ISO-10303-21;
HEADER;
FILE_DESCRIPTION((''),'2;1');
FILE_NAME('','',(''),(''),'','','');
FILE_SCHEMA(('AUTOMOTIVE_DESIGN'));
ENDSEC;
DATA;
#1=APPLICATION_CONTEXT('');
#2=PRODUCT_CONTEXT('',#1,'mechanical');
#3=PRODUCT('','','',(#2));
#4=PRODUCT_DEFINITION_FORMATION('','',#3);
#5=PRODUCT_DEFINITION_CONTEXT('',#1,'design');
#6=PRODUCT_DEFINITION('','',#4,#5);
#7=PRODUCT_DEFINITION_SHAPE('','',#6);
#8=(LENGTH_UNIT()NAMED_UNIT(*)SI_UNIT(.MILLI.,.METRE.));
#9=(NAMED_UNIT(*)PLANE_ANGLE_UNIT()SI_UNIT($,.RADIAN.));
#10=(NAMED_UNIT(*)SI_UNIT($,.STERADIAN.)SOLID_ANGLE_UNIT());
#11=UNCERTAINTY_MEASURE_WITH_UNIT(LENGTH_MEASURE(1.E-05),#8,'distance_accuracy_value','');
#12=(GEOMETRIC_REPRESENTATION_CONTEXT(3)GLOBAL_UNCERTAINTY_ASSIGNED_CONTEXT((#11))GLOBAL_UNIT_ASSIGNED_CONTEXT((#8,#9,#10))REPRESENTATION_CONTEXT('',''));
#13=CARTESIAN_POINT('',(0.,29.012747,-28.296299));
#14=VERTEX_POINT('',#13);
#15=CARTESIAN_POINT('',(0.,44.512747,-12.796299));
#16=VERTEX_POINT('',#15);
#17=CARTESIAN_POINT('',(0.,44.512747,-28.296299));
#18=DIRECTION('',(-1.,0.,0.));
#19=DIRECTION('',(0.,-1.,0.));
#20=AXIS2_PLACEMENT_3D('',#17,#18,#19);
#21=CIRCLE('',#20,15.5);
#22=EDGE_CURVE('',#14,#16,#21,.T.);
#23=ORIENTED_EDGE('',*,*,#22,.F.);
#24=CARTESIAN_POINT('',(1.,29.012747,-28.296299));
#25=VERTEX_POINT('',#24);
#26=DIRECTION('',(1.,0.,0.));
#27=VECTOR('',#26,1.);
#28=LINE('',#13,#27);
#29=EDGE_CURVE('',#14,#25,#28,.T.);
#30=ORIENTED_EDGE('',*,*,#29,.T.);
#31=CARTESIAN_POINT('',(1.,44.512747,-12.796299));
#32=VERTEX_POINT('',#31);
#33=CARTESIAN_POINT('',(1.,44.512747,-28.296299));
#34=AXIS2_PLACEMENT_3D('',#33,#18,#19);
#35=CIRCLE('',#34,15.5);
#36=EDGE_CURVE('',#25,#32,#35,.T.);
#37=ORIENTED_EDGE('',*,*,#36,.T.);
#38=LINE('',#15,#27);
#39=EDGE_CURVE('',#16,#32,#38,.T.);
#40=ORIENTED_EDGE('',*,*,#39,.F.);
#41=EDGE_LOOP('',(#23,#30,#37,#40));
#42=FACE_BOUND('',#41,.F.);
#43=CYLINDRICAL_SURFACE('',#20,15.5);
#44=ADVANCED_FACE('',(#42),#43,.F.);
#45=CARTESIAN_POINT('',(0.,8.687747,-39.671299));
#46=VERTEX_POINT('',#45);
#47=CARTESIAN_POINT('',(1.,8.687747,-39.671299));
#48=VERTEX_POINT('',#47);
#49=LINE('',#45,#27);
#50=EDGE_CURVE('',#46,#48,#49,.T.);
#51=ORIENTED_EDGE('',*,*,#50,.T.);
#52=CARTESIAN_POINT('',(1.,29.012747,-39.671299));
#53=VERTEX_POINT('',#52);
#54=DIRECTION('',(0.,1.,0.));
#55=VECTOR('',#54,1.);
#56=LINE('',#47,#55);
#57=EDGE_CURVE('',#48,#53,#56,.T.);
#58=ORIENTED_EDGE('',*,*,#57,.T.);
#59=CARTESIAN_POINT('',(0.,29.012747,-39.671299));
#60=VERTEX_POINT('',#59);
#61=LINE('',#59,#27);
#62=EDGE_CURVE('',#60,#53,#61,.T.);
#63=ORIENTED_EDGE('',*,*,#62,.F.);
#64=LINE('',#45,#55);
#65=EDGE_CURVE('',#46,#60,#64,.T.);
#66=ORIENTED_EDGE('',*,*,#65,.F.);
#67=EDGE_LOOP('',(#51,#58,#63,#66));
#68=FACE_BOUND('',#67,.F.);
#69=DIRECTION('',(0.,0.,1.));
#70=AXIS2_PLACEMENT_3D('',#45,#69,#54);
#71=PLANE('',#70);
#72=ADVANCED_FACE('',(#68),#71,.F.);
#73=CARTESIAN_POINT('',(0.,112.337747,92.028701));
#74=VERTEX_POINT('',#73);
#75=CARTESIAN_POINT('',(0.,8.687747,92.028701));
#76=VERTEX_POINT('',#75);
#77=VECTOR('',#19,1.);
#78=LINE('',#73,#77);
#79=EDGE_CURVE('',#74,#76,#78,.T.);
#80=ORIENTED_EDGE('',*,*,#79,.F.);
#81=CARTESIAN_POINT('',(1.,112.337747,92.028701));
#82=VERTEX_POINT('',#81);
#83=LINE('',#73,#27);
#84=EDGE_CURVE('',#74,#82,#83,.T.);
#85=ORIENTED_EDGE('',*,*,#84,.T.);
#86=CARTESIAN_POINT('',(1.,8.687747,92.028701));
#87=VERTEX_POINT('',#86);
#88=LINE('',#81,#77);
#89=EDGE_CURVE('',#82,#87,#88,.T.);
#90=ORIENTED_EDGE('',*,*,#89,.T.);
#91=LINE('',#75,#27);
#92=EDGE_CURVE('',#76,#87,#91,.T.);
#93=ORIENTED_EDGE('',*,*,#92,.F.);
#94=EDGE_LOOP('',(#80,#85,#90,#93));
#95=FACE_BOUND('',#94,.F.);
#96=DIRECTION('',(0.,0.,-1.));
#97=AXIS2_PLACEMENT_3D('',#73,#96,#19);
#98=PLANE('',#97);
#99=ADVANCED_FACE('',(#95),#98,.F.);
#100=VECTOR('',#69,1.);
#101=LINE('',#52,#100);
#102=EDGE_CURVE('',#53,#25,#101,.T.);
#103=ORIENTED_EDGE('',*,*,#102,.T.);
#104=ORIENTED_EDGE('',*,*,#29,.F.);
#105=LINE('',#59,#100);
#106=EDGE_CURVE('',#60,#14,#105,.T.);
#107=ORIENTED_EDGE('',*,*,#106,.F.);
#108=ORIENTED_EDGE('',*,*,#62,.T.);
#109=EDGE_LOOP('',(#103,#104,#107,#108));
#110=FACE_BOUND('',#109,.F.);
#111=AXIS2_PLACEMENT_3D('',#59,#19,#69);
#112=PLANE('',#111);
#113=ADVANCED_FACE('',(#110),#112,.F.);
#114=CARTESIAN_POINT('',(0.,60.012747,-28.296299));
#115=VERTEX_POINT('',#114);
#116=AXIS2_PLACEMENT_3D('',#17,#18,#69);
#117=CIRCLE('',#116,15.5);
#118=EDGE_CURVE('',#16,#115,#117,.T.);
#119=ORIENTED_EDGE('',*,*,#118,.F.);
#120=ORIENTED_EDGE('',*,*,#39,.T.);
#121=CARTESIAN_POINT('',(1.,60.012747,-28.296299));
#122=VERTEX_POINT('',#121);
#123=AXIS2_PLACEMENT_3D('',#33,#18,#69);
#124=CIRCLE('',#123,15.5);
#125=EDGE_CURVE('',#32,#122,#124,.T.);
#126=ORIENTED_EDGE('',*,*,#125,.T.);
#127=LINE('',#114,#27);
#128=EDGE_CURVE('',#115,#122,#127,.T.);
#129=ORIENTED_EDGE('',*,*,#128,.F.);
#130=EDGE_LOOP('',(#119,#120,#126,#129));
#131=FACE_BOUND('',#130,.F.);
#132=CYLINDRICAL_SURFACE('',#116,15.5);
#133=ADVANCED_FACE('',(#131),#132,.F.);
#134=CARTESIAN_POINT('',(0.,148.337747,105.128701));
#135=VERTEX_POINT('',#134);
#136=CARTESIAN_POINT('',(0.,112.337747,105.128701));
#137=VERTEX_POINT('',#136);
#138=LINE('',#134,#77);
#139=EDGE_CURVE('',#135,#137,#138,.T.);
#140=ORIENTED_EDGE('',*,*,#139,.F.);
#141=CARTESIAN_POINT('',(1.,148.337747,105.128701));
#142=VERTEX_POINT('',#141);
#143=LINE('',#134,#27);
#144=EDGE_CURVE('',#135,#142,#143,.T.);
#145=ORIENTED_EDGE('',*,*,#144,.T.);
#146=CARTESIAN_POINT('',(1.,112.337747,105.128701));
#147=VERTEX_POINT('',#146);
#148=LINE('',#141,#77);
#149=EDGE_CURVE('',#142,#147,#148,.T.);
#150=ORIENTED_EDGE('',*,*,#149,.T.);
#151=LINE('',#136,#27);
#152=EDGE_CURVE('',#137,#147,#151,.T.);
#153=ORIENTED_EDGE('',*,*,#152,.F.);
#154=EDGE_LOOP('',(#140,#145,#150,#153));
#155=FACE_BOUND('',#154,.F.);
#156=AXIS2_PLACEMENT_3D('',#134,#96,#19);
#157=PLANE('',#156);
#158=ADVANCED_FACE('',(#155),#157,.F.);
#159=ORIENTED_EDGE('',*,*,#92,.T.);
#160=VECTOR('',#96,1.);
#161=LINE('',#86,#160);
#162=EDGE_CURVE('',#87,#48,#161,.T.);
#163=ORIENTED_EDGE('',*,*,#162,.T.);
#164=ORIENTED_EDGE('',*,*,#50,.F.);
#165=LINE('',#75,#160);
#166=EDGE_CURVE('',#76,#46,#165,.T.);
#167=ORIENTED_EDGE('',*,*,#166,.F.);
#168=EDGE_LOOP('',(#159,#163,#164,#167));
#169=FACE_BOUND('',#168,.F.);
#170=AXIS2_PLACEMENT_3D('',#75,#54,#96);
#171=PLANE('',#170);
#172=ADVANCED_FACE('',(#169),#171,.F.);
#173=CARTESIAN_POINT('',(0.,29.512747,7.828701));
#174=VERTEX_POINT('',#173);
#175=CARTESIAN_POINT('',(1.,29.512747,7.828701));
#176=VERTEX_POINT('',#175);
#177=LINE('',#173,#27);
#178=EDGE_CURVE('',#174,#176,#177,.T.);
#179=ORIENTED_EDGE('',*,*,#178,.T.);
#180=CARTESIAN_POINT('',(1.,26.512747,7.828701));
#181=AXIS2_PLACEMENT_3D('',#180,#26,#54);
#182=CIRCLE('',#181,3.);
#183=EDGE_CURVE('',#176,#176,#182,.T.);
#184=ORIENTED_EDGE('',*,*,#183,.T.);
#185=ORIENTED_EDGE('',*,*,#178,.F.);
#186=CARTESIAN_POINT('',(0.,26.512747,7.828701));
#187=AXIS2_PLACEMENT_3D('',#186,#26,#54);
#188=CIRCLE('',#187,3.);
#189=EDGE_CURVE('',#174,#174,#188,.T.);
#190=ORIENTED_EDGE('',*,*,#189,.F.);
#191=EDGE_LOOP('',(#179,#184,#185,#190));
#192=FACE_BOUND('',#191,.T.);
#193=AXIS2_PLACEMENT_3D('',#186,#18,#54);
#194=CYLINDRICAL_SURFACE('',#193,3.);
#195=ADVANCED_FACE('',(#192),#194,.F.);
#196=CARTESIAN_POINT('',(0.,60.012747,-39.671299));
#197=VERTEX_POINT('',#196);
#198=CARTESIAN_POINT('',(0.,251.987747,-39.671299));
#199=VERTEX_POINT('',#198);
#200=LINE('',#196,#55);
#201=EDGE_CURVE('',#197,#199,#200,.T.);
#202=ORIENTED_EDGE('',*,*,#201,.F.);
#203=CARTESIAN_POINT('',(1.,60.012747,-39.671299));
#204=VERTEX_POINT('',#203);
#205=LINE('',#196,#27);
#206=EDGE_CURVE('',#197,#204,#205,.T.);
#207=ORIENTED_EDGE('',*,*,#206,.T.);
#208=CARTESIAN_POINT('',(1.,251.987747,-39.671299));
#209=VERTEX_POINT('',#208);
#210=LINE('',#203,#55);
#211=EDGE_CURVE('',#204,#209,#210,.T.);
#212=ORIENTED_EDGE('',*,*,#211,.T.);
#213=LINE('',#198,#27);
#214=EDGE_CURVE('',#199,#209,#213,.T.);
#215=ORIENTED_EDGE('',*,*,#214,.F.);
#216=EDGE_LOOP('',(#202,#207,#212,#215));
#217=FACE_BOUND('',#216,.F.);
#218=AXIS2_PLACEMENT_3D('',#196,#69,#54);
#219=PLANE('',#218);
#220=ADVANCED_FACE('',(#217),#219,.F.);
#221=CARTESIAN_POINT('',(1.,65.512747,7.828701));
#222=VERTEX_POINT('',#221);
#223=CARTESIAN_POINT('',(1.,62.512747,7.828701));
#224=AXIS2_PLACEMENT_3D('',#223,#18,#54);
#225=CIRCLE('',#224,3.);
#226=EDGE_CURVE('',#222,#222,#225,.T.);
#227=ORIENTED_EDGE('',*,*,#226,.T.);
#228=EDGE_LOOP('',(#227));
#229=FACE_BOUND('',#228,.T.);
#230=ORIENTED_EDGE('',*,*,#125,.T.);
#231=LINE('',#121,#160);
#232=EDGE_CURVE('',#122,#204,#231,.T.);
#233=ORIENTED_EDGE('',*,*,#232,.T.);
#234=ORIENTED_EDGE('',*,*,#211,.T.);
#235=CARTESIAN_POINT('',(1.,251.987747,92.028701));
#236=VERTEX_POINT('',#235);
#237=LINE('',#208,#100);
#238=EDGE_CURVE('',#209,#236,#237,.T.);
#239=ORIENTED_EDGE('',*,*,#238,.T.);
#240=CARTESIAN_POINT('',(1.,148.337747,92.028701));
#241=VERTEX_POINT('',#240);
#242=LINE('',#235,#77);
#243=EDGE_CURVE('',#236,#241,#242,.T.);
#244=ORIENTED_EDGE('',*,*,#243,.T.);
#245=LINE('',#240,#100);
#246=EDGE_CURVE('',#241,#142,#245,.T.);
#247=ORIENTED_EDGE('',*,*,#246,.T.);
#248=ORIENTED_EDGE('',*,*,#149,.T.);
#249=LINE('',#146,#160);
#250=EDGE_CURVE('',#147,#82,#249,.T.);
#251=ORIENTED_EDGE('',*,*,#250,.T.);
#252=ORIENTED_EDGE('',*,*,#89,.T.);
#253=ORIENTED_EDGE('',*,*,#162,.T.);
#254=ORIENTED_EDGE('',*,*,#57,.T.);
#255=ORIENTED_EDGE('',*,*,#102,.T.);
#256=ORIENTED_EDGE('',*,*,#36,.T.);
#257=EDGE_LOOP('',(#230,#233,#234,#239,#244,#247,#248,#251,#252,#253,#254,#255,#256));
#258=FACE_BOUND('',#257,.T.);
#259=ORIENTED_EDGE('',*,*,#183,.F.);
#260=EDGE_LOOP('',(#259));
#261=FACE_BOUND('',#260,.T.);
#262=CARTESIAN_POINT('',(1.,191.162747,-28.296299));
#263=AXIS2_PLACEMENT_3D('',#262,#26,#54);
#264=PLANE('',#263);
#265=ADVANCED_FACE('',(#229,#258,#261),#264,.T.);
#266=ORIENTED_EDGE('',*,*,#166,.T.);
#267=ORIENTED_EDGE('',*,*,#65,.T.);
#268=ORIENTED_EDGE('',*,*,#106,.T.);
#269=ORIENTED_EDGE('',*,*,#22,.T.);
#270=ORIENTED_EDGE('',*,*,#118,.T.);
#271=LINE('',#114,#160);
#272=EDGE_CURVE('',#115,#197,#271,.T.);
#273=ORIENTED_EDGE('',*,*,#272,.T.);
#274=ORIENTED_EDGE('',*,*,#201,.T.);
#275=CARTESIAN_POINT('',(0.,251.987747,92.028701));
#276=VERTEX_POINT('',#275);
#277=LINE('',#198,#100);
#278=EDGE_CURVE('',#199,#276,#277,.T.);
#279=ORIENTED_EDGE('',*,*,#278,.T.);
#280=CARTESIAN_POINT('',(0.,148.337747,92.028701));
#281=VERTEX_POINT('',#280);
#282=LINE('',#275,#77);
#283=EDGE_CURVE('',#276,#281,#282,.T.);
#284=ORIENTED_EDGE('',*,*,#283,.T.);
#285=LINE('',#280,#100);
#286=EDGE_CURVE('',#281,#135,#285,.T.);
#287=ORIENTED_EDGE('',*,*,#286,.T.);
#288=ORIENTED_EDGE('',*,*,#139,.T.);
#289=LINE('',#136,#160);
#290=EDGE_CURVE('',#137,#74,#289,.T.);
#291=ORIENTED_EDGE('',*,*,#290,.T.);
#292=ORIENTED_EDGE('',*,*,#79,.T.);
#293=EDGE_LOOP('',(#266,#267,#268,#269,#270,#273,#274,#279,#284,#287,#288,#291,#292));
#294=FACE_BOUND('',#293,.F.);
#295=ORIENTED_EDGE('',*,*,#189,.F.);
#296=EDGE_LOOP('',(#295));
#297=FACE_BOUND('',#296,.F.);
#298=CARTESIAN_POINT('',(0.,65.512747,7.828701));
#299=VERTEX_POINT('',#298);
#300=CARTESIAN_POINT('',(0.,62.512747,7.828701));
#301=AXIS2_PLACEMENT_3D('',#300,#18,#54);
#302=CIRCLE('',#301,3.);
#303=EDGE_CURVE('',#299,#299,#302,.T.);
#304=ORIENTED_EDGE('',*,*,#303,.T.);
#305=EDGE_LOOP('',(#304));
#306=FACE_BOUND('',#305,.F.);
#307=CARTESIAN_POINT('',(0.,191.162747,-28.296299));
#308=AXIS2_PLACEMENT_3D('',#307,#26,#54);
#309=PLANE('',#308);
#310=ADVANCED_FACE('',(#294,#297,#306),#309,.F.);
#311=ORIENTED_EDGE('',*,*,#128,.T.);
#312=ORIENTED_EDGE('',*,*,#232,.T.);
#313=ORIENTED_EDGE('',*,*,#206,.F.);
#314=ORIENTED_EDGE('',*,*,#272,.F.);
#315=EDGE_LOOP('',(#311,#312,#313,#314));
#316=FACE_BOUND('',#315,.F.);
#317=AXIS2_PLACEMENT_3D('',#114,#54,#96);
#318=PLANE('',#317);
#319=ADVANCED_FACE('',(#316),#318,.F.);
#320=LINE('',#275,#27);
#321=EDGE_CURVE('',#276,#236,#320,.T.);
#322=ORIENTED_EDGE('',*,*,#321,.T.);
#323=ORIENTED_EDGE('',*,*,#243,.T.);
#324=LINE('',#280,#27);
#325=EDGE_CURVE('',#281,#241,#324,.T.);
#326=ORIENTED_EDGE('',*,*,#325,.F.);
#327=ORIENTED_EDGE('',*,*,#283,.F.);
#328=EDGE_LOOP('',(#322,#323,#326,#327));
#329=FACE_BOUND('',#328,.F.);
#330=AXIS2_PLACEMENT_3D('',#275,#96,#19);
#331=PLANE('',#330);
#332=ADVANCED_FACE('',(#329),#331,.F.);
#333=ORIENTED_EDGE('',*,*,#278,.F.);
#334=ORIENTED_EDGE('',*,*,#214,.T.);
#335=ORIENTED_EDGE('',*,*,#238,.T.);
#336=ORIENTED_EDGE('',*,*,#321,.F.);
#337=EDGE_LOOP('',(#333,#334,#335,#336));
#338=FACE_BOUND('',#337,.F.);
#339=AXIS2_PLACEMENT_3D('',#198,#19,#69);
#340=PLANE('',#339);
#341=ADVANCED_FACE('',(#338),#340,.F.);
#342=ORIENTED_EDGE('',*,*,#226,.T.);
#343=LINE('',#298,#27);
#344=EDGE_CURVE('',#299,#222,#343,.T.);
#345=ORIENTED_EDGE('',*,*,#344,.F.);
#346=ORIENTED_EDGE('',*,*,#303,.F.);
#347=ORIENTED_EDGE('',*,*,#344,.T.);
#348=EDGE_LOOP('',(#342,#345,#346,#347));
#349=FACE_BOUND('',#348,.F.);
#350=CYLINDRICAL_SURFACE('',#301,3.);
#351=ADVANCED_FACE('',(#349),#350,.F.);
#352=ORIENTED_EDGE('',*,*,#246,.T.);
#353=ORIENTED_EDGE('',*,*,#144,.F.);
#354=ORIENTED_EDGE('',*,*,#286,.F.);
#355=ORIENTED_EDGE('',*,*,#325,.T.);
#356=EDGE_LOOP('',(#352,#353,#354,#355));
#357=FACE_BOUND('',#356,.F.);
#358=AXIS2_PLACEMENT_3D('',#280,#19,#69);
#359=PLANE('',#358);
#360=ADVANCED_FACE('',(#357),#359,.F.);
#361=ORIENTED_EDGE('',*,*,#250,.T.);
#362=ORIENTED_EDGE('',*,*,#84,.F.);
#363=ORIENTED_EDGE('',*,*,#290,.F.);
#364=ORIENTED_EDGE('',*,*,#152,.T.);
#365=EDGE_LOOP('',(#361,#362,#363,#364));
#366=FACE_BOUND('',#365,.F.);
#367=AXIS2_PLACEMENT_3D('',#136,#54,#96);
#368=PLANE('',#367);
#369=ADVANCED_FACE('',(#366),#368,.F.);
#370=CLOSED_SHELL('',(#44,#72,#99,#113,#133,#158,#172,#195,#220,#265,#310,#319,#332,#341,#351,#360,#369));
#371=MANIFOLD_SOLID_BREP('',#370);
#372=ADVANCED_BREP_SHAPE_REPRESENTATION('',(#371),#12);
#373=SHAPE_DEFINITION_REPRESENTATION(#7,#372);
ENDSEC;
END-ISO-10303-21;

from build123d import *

# Parameters (mm, degrees)
F0_W     = 28.35
F0_H     = 108.95
F0_W_2   = 6
F0_H_2   = 28
F0_W_3   = 4
F0_H_3   = 32.75
F0_H_4   = 9.8
F0_H_5   = 24
F0_W_4   = 9.65
F0_H_6   = 76.2
F0_H_7   = 11.1
F0_R     = 3
F1_DEPTH = 1


# Not quite as in the source:
# - a feature names something its author has since deleted; it is built from what else it names


with BuildPart() as f1:
    # F0 (on Right) → F1 (new body)
    with BuildSketch(Plane.YZ):
        Polygon((178.337747033, -16.9212994559), (149.987747033, -16.9212994559), (130.337747033, -16.9212994559), (130.337747033, -39.6712994559), (251.987747033, -39.6712994559), (251.987747033, -16.9212994559), (182.337747033, -16.9212994559), align=None)
        with Locations((164.162747033, 37.5537005441)):
            Rectangle(F0_W, F0_H)
        Polygon((130.337747033, -16.9212994559), (149.987747033, -16.9212994559), (149.987747033, 92.0287005441), (148.337747033, 92.0287005441), (136.337747033, 92.0287005441), (136.337747033, 68.0287005441), (136.337747033, 56.9287005441), (136.337747033, 28.9287005441), (136.337747033, 19.1287005441), (136.337747033, -8.8712994559), (130.337747033, -8.8712994559), align=None)
        Polygon((130.337747033, -39.6712994559), (130.337747033, -16.9212994559), (110.687747033, -16.9212994559), (82.337747033, -16.9212994559), (82.337747033, -28.2962994559), (82.337747033, -39.6712994559), align=None)
        Polygon((110.687747033, -16.9212994559), (130.337747033, -16.9212994559), (130.337747033, -8.8712994559), (124.337747033, -8.8712994559), (124.337747033, 19.1287005441), (124.337747033, 21.9287005441), (124.337747033, 24.7287005441), (124.337747033, 27.5287005441), (124.337747033, 28.9287005441), (124.337747033, 56.9287005441), (130.337747033, 56.9287005441), (130.337747033, 68.0287005441), (124.337747033, 68.0287005441), (124.337747033, 92.0287005441), (130.337747033, 92.0287005441), (136.337747033, 92.0287005441), (148.337747033, 92.0287005441), (148.337747033, 102.1287005441), (148.337747033, 105.1287005441), (143.337747033, 105.1287005441), (130.337747033, 105.1287005441), (112.337747033, 105.1287005441), (112.337747033, 102.1287005441), (112.337747033, 92.0287005441), (110.687747033, 92.0287005441), align=None)
        Polygon((178.337747033, 92.0287005441), (178.337747033, -16.9212994559), (182.337747033, -16.9212994559), (182.337747033, 92.0287005441), (179.8798441887, 92.0287005441), align=None)
        Polygon((82.337747033, -16.9212994559), (110.687747033, -16.9212994559), (110.687747033, 92.0287005441), (82.337747033, 92.0287005441), (82.337747033, 15.8287005441), align=None)
        with Locations((133.337747033, 5.1287005441)):
            Rectangle(F0_W_2, F0_H_2)
        with Locations((127.337747033, 5.1287005441)):
            Rectangle(F0_W_2, F0_H_2)
        Polygon((182.337747033, 92.0287005441), (182.337747033, -16.9212994559), (251.987747033, -16.9212994559), (251.987747033, 92.0287005441), (226.687747033, 92.0287005441), (216.162747033, 92.0287005441), (214.687747033, 92.0287005441), align=None)
        Polygon((82.337747033, -28.2962994559), (82.337747033, -16.9212994559), (78.337747033, -16.9212994559), (68.687747033, -16.9212994559), (68.687747033, -28.2962994559), align=None)
        with Locations((80.337747033, -0.5462994559)):
            Rectangle(F0_W_3, F0_H_3)
        with Locations((133.337747033, 24.0287005441)):
            Rectangle(F0_W_2, F0_H_4)
        Polygon((124.337747033, 19.1287005441), (130.337747033, 19.1287005441), (130.337747033, 28.9287005441), (124.337747033, 28.9287005441), (124.337747033, 27.5287005441), (124.337747033, 24.7287005441), (124.337747033, 21.9287005441), align=None)
        Polygon((60.012747033, -39.6712994559), (82.337747033, -39.6712994559), (82.337747033, -28.2962994559), (68.687747033, -28.2962994559), (63.512747033, -28.2962994559), (60.012747033, -28.2962994559), align=None)
        with Locations((133.337747033, 80.0287005441)):
            Rectangle(F0_W_2, F0_H_5)
        with Locations((73.512747033, -0.5462994559)):
            Rectangle(F0_W_4, F0_H_3)
        with Locations((80.337747033, 53.9287005441)):
            Rectangle(F0_W_3, F0_H_6)
        with Locations((133.337747033, 42.9287005441)):
            Rectangle(F0_W_2, F0_H_2)
        with Locations((127.337747033, 42.9287005441)):
            Rectangle(F0_W_2, F0_H_2)
        with Locations((127.337747033, 80.0287005441)):
            Rectangle(F0_W_2, F0_H_5)
        with Locations((133.337747033, 62.4787005441)):
            Rectangle(F0_W_2, F0_H_7)
        with BuildLine():
            Line((68.687747033, -28.2962994559), (68.687747033, -16.9212994559))
            Line((68.687747033, -16.9212994559), (68.687747033, 15.8287005441))
            Line((68.687747033, 15.8287005441), (54.687747033, 15.8287005441))
            Line((54.687747033, 15.8287005441), (44.512747033, 15.8287005441))
            Line((44.512747033, 15.8287005441), (37.687747033, 15.8287005441))
            Line((37.687747033, 15.8287005441), (8.687747033, 15.8287005441))
            Line((8.687747033, 15.8287005441), (8.687747033, -28.2962994559))
            Line((8.687747033, -28.2962994559), (25.512747033, -28.2962994559))
            ThreePointArc((25.512747033, -28.2962994559), (31.0777181904, -14.8612706134), (44.512747033, -9.2962994559))
            ThreePointArc((44.512747033, -9.2962994559), (57.9477758755, -14.8612706134), (63.512747033, -28.2962994559))
            Line((63.512747033, -28.2962994559), (68.687747033, -28.2962994559))
        make_face()
        with Locations((26.512747033, 7.8287005441)):
            Circle(F0_R, mode=Mode.SUBTRACT)
        with BuildLine():
            ThreePointArc((59.512747033, 7.8287005441), (62.512747033, 10.8287005441), (65.512747033, 7.8287005441))
            ThreePointArc((65.512747033, 7.8287005441), (62.512747033, 4.8287005441), (59.512747033, 7.8287005441))
        make_face(mode=Mode.SUBTRACT)
        Polygon((68.687747033, 15.8287005441), (78.337747033, 15.8287005441), (78.337747033, 92.0287005441), (37.687747033, 92.0287005441), (8.687747033, 92.0287005441), (8.687747033, 32.6287005441), (33.187747033, 32.6287005441), (37.687747033, 32.6287005441), (37.687747033, 15.8287005441), (44.512747033, 15.8287005441), (54.687747033, 15.8287005441), align=None)
        with BuildLine():
            ThreePointArc((44.512747033, -12.7962994559), (55.4729021414, -17.3361443475), (60.012747033, -28.2962994559))
            Line((60.012747033, -28.2962994559), (63.512747033, -28.2962994559))
            ThreePointArc((63.512747033, -28.2962994559), (57.9477758755, -14.8612706134), (44.512747033, -9.2962994559))
            Line((44.512747033, -9.2962994559), (44.512747033, -12.7962994559))
        make_face()
        with BuildLine():
            ThreePointArc((29.012747033, -28.2962994559), (33.5525919246, -17.3361443475), (44.512747033, -12.7962994559))
            Line((44.512747033, -12.7962994559), (44.512747033, -9.2962994559))
            ThreePointArc((44.512747033, -9.2962994559), (31.0777181904, -14.8612706134), (25.512747033, -28.2962994559))
            Line((25.512747033, -28.2962994559), (28.8426652551, -28.2962994559))
            Line((28.8426652551, -28.2962994559), (29.012747033, -28.2962994559))
        make_face()
        Polygon((29.012747033, -39.6712994559), (29.012747033, -28.2962994559), (28.8426652551, -28.2962994559), (25.512747033, -28.2962994559), (8.687747033, -28.2962994559), (8.687747033, -39.6712994559), align=None)
        Polygon((33.187747033, 32.6287005441), (8.687747033, 32.6287005441), (8.687747033, 15.8287005441), (37.687747033, 15.8287005441), (37.687747033, 32.6287005441), align=None)
    extrude(amount=F1_DEPTH)


solid = f1.part
